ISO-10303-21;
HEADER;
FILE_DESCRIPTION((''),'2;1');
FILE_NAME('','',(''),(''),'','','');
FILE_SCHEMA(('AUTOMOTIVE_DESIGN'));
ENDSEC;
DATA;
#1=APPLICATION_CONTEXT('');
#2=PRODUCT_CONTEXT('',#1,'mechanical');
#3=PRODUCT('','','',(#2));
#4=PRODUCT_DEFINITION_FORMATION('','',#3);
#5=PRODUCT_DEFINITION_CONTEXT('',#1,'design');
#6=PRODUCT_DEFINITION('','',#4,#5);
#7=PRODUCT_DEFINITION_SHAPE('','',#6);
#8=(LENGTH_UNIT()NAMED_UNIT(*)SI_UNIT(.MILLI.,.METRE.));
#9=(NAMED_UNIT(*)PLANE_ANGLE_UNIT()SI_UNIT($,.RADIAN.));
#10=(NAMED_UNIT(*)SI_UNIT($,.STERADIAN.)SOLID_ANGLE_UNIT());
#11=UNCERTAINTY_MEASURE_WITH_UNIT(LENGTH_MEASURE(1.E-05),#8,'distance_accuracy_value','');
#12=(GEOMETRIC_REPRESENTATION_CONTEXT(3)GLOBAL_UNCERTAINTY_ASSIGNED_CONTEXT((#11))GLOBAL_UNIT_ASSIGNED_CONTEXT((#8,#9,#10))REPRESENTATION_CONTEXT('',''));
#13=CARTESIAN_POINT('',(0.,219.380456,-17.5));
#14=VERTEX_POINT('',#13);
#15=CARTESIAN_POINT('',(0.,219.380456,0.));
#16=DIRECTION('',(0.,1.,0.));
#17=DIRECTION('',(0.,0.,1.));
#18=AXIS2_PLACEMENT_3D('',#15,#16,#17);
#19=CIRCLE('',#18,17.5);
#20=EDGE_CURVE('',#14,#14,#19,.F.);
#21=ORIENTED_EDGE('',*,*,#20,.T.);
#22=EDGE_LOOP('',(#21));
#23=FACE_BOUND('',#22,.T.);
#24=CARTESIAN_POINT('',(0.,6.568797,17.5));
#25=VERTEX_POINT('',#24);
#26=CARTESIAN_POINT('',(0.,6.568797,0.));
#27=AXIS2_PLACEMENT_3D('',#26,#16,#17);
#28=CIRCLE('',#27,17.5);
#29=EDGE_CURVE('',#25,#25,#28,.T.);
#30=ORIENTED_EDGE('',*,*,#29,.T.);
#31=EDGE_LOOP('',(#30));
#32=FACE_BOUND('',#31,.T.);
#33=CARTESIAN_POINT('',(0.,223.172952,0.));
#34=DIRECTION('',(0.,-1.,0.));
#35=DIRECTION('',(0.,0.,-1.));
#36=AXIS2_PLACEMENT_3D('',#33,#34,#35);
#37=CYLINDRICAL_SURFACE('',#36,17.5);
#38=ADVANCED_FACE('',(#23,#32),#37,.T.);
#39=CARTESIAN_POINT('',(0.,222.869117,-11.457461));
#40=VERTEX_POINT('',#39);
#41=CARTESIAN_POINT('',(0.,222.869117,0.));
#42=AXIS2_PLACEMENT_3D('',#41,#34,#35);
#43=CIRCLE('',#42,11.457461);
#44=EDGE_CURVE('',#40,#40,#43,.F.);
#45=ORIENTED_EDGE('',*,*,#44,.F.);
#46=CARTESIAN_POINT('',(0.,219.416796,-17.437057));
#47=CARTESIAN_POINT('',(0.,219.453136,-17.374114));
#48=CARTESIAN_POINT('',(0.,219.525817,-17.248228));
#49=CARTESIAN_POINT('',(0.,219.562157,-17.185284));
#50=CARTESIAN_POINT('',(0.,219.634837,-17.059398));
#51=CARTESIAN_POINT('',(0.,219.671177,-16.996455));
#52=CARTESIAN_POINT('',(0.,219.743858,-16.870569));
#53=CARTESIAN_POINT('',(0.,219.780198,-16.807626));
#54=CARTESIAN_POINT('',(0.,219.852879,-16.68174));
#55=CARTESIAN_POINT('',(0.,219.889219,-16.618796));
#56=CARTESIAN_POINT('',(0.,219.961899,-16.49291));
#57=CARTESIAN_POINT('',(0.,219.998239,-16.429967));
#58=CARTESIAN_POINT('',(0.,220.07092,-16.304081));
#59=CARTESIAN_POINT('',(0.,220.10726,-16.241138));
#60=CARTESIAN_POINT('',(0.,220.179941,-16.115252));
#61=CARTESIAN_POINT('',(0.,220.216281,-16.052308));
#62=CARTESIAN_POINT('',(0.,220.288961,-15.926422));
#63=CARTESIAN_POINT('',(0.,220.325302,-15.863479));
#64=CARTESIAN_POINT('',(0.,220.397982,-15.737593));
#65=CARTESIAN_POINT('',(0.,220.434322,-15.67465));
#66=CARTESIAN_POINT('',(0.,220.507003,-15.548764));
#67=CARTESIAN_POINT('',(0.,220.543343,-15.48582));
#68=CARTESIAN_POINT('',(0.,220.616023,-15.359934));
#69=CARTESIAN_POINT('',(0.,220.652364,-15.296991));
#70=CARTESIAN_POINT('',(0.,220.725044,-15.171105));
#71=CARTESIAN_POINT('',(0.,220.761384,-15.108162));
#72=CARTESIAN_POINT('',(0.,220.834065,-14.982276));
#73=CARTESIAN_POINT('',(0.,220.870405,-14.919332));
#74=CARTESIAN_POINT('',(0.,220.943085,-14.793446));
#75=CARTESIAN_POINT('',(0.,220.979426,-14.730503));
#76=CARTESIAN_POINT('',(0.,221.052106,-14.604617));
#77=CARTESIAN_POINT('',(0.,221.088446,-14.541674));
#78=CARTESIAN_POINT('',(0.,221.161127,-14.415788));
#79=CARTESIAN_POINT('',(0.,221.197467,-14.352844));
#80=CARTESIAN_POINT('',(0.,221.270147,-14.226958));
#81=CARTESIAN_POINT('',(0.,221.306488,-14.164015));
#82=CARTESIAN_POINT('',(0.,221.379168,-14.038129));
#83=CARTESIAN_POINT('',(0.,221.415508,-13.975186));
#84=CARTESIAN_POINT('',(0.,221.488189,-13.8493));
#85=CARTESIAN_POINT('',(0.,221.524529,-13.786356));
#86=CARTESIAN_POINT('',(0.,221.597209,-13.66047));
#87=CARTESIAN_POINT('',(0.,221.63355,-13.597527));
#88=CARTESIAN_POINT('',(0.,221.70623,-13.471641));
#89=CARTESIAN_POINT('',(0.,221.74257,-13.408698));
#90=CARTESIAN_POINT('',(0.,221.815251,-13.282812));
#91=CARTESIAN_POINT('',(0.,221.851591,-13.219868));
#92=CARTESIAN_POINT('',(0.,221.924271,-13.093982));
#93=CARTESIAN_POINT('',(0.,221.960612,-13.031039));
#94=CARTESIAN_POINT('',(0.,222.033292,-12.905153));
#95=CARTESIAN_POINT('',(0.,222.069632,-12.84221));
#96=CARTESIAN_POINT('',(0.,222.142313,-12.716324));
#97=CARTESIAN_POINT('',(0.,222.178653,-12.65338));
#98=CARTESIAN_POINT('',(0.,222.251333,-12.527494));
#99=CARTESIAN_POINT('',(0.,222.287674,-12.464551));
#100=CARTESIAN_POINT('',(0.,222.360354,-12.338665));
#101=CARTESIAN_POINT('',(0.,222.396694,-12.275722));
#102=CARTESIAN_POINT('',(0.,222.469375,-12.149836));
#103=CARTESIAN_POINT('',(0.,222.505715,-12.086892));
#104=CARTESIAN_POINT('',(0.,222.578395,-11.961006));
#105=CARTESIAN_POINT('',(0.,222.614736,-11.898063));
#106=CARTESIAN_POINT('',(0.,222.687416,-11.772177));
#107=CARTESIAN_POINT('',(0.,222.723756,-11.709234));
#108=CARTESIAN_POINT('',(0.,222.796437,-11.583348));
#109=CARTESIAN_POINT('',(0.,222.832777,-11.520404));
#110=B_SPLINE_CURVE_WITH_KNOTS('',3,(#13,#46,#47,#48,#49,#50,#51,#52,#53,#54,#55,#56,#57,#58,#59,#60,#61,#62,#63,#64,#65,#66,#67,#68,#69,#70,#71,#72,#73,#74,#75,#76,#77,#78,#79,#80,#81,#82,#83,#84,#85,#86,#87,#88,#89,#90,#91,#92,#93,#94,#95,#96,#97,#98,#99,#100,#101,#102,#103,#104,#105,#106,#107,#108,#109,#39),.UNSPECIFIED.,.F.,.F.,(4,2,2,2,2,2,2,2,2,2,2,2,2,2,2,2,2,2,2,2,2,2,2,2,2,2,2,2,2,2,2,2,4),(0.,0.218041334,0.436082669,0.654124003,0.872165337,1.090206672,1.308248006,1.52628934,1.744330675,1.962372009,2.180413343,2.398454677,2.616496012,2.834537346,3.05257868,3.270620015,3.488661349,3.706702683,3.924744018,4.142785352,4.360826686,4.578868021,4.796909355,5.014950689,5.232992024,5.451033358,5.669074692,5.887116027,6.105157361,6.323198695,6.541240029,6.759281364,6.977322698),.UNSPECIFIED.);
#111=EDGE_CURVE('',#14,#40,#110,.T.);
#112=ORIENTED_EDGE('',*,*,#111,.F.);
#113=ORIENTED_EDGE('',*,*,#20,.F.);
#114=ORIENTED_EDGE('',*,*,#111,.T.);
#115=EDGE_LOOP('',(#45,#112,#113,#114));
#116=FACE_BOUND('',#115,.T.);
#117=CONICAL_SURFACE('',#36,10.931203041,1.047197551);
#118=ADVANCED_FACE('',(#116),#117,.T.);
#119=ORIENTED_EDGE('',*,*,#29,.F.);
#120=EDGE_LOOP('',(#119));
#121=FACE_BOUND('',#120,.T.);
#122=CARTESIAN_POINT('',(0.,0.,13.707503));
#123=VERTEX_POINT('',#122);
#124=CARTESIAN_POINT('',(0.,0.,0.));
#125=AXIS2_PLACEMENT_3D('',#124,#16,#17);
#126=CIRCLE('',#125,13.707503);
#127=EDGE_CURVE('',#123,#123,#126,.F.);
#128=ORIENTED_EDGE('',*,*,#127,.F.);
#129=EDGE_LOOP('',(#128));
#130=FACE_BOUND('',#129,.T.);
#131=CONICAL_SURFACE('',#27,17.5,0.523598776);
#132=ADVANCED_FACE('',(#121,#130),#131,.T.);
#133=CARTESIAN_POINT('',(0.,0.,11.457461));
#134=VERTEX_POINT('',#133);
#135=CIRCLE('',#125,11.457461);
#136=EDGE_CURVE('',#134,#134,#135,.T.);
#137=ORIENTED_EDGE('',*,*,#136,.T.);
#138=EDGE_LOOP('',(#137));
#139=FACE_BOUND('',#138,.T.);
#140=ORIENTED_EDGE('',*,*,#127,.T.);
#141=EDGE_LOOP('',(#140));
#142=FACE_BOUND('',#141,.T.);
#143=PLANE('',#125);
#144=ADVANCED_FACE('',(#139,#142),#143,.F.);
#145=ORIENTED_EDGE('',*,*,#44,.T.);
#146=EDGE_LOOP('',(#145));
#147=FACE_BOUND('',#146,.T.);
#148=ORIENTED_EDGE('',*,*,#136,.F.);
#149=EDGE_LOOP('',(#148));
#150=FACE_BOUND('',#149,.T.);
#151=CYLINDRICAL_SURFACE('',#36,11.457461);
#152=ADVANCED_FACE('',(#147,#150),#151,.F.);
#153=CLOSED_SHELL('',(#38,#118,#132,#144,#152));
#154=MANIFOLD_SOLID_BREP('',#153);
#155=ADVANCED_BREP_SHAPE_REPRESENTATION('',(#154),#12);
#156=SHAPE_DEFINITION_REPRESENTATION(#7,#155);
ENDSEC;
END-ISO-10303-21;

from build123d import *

# Parameters (mm, degrees)
SKETCH1_R           = 17.5
BOSS_EXTRUDE1_DEPTH = 223.172952
SKETCH2_R           = 11.457461293
CUT_EXTRUDE1_DEPTH  = 225.541012967
CHAMFER1_SIZE       = 3.792497
CHAMFER1_SIZE_2     = 6.568797


with BuildPart() as part:
    # Sketch1 → Boss-Extrude1 (new body)
    with BuildSketch(Plane(origin=(0, 0, 0), x_dir=(1, 0, 0), z_dir=(0, 1, 0))):
        with Locations(Location((0, 0, 0), (0, 0, 270))):
            Circle(SKETCH1_R)
    extrude(amount=BOSS_EXTRUDE1_DEPTH)

    # Sketch2 → Cut-Extrude1 (cut, through all)
    with BuildSketch(Plane(origin=(0, 0, 0), x_dir=(1, 0, 0), z_dir=(0, 1, 0))):
        with Locations(Location((0, 0, 0), (0, 0, 270))):
            Circle(SKETCH2_R)
    extrude(amount=CUT_EXTRUDE1_DEPTH, mode=Mode.SUBTRACT)

    # Chamfer1
    # the kernel refuses this chamfer: 6.568797, 3.792497 mm, written as the material it takes off along each edge
    with BuildSketch(Plane(origin=(0, 223.172952, 0), x_dir=(0, 0, 1), z_dir=(-1, 0, 0))) as chamfer1_piece_1:
        Polygon((17.5, -CHAMFER1_SIZE), (17.5 - CHAMFER1_SIZE_2, 0), (17.5, 0), align=None)
    revolve(axis=Axis((0, 223.172952, 0), (0, 1, 0)), mode=Mode.SUBTRACT)
    with BuildSketch(Plane(origin=(0, 0, 0), x_dir=(0, 0, 1), z_dir=(-1, 0, 0))) as chamfer1_piece_2:
        Polygon((17.5, CHAMFER1_SIZE_2), (17.5 - CHAMFER1_SIZE, 0), (17.5, 0), align=None)
    revolve(axis=Axis((0, 0, 0), (0, 1, 0)), mode=Mode.SUBTRACT)


solid = part.part
